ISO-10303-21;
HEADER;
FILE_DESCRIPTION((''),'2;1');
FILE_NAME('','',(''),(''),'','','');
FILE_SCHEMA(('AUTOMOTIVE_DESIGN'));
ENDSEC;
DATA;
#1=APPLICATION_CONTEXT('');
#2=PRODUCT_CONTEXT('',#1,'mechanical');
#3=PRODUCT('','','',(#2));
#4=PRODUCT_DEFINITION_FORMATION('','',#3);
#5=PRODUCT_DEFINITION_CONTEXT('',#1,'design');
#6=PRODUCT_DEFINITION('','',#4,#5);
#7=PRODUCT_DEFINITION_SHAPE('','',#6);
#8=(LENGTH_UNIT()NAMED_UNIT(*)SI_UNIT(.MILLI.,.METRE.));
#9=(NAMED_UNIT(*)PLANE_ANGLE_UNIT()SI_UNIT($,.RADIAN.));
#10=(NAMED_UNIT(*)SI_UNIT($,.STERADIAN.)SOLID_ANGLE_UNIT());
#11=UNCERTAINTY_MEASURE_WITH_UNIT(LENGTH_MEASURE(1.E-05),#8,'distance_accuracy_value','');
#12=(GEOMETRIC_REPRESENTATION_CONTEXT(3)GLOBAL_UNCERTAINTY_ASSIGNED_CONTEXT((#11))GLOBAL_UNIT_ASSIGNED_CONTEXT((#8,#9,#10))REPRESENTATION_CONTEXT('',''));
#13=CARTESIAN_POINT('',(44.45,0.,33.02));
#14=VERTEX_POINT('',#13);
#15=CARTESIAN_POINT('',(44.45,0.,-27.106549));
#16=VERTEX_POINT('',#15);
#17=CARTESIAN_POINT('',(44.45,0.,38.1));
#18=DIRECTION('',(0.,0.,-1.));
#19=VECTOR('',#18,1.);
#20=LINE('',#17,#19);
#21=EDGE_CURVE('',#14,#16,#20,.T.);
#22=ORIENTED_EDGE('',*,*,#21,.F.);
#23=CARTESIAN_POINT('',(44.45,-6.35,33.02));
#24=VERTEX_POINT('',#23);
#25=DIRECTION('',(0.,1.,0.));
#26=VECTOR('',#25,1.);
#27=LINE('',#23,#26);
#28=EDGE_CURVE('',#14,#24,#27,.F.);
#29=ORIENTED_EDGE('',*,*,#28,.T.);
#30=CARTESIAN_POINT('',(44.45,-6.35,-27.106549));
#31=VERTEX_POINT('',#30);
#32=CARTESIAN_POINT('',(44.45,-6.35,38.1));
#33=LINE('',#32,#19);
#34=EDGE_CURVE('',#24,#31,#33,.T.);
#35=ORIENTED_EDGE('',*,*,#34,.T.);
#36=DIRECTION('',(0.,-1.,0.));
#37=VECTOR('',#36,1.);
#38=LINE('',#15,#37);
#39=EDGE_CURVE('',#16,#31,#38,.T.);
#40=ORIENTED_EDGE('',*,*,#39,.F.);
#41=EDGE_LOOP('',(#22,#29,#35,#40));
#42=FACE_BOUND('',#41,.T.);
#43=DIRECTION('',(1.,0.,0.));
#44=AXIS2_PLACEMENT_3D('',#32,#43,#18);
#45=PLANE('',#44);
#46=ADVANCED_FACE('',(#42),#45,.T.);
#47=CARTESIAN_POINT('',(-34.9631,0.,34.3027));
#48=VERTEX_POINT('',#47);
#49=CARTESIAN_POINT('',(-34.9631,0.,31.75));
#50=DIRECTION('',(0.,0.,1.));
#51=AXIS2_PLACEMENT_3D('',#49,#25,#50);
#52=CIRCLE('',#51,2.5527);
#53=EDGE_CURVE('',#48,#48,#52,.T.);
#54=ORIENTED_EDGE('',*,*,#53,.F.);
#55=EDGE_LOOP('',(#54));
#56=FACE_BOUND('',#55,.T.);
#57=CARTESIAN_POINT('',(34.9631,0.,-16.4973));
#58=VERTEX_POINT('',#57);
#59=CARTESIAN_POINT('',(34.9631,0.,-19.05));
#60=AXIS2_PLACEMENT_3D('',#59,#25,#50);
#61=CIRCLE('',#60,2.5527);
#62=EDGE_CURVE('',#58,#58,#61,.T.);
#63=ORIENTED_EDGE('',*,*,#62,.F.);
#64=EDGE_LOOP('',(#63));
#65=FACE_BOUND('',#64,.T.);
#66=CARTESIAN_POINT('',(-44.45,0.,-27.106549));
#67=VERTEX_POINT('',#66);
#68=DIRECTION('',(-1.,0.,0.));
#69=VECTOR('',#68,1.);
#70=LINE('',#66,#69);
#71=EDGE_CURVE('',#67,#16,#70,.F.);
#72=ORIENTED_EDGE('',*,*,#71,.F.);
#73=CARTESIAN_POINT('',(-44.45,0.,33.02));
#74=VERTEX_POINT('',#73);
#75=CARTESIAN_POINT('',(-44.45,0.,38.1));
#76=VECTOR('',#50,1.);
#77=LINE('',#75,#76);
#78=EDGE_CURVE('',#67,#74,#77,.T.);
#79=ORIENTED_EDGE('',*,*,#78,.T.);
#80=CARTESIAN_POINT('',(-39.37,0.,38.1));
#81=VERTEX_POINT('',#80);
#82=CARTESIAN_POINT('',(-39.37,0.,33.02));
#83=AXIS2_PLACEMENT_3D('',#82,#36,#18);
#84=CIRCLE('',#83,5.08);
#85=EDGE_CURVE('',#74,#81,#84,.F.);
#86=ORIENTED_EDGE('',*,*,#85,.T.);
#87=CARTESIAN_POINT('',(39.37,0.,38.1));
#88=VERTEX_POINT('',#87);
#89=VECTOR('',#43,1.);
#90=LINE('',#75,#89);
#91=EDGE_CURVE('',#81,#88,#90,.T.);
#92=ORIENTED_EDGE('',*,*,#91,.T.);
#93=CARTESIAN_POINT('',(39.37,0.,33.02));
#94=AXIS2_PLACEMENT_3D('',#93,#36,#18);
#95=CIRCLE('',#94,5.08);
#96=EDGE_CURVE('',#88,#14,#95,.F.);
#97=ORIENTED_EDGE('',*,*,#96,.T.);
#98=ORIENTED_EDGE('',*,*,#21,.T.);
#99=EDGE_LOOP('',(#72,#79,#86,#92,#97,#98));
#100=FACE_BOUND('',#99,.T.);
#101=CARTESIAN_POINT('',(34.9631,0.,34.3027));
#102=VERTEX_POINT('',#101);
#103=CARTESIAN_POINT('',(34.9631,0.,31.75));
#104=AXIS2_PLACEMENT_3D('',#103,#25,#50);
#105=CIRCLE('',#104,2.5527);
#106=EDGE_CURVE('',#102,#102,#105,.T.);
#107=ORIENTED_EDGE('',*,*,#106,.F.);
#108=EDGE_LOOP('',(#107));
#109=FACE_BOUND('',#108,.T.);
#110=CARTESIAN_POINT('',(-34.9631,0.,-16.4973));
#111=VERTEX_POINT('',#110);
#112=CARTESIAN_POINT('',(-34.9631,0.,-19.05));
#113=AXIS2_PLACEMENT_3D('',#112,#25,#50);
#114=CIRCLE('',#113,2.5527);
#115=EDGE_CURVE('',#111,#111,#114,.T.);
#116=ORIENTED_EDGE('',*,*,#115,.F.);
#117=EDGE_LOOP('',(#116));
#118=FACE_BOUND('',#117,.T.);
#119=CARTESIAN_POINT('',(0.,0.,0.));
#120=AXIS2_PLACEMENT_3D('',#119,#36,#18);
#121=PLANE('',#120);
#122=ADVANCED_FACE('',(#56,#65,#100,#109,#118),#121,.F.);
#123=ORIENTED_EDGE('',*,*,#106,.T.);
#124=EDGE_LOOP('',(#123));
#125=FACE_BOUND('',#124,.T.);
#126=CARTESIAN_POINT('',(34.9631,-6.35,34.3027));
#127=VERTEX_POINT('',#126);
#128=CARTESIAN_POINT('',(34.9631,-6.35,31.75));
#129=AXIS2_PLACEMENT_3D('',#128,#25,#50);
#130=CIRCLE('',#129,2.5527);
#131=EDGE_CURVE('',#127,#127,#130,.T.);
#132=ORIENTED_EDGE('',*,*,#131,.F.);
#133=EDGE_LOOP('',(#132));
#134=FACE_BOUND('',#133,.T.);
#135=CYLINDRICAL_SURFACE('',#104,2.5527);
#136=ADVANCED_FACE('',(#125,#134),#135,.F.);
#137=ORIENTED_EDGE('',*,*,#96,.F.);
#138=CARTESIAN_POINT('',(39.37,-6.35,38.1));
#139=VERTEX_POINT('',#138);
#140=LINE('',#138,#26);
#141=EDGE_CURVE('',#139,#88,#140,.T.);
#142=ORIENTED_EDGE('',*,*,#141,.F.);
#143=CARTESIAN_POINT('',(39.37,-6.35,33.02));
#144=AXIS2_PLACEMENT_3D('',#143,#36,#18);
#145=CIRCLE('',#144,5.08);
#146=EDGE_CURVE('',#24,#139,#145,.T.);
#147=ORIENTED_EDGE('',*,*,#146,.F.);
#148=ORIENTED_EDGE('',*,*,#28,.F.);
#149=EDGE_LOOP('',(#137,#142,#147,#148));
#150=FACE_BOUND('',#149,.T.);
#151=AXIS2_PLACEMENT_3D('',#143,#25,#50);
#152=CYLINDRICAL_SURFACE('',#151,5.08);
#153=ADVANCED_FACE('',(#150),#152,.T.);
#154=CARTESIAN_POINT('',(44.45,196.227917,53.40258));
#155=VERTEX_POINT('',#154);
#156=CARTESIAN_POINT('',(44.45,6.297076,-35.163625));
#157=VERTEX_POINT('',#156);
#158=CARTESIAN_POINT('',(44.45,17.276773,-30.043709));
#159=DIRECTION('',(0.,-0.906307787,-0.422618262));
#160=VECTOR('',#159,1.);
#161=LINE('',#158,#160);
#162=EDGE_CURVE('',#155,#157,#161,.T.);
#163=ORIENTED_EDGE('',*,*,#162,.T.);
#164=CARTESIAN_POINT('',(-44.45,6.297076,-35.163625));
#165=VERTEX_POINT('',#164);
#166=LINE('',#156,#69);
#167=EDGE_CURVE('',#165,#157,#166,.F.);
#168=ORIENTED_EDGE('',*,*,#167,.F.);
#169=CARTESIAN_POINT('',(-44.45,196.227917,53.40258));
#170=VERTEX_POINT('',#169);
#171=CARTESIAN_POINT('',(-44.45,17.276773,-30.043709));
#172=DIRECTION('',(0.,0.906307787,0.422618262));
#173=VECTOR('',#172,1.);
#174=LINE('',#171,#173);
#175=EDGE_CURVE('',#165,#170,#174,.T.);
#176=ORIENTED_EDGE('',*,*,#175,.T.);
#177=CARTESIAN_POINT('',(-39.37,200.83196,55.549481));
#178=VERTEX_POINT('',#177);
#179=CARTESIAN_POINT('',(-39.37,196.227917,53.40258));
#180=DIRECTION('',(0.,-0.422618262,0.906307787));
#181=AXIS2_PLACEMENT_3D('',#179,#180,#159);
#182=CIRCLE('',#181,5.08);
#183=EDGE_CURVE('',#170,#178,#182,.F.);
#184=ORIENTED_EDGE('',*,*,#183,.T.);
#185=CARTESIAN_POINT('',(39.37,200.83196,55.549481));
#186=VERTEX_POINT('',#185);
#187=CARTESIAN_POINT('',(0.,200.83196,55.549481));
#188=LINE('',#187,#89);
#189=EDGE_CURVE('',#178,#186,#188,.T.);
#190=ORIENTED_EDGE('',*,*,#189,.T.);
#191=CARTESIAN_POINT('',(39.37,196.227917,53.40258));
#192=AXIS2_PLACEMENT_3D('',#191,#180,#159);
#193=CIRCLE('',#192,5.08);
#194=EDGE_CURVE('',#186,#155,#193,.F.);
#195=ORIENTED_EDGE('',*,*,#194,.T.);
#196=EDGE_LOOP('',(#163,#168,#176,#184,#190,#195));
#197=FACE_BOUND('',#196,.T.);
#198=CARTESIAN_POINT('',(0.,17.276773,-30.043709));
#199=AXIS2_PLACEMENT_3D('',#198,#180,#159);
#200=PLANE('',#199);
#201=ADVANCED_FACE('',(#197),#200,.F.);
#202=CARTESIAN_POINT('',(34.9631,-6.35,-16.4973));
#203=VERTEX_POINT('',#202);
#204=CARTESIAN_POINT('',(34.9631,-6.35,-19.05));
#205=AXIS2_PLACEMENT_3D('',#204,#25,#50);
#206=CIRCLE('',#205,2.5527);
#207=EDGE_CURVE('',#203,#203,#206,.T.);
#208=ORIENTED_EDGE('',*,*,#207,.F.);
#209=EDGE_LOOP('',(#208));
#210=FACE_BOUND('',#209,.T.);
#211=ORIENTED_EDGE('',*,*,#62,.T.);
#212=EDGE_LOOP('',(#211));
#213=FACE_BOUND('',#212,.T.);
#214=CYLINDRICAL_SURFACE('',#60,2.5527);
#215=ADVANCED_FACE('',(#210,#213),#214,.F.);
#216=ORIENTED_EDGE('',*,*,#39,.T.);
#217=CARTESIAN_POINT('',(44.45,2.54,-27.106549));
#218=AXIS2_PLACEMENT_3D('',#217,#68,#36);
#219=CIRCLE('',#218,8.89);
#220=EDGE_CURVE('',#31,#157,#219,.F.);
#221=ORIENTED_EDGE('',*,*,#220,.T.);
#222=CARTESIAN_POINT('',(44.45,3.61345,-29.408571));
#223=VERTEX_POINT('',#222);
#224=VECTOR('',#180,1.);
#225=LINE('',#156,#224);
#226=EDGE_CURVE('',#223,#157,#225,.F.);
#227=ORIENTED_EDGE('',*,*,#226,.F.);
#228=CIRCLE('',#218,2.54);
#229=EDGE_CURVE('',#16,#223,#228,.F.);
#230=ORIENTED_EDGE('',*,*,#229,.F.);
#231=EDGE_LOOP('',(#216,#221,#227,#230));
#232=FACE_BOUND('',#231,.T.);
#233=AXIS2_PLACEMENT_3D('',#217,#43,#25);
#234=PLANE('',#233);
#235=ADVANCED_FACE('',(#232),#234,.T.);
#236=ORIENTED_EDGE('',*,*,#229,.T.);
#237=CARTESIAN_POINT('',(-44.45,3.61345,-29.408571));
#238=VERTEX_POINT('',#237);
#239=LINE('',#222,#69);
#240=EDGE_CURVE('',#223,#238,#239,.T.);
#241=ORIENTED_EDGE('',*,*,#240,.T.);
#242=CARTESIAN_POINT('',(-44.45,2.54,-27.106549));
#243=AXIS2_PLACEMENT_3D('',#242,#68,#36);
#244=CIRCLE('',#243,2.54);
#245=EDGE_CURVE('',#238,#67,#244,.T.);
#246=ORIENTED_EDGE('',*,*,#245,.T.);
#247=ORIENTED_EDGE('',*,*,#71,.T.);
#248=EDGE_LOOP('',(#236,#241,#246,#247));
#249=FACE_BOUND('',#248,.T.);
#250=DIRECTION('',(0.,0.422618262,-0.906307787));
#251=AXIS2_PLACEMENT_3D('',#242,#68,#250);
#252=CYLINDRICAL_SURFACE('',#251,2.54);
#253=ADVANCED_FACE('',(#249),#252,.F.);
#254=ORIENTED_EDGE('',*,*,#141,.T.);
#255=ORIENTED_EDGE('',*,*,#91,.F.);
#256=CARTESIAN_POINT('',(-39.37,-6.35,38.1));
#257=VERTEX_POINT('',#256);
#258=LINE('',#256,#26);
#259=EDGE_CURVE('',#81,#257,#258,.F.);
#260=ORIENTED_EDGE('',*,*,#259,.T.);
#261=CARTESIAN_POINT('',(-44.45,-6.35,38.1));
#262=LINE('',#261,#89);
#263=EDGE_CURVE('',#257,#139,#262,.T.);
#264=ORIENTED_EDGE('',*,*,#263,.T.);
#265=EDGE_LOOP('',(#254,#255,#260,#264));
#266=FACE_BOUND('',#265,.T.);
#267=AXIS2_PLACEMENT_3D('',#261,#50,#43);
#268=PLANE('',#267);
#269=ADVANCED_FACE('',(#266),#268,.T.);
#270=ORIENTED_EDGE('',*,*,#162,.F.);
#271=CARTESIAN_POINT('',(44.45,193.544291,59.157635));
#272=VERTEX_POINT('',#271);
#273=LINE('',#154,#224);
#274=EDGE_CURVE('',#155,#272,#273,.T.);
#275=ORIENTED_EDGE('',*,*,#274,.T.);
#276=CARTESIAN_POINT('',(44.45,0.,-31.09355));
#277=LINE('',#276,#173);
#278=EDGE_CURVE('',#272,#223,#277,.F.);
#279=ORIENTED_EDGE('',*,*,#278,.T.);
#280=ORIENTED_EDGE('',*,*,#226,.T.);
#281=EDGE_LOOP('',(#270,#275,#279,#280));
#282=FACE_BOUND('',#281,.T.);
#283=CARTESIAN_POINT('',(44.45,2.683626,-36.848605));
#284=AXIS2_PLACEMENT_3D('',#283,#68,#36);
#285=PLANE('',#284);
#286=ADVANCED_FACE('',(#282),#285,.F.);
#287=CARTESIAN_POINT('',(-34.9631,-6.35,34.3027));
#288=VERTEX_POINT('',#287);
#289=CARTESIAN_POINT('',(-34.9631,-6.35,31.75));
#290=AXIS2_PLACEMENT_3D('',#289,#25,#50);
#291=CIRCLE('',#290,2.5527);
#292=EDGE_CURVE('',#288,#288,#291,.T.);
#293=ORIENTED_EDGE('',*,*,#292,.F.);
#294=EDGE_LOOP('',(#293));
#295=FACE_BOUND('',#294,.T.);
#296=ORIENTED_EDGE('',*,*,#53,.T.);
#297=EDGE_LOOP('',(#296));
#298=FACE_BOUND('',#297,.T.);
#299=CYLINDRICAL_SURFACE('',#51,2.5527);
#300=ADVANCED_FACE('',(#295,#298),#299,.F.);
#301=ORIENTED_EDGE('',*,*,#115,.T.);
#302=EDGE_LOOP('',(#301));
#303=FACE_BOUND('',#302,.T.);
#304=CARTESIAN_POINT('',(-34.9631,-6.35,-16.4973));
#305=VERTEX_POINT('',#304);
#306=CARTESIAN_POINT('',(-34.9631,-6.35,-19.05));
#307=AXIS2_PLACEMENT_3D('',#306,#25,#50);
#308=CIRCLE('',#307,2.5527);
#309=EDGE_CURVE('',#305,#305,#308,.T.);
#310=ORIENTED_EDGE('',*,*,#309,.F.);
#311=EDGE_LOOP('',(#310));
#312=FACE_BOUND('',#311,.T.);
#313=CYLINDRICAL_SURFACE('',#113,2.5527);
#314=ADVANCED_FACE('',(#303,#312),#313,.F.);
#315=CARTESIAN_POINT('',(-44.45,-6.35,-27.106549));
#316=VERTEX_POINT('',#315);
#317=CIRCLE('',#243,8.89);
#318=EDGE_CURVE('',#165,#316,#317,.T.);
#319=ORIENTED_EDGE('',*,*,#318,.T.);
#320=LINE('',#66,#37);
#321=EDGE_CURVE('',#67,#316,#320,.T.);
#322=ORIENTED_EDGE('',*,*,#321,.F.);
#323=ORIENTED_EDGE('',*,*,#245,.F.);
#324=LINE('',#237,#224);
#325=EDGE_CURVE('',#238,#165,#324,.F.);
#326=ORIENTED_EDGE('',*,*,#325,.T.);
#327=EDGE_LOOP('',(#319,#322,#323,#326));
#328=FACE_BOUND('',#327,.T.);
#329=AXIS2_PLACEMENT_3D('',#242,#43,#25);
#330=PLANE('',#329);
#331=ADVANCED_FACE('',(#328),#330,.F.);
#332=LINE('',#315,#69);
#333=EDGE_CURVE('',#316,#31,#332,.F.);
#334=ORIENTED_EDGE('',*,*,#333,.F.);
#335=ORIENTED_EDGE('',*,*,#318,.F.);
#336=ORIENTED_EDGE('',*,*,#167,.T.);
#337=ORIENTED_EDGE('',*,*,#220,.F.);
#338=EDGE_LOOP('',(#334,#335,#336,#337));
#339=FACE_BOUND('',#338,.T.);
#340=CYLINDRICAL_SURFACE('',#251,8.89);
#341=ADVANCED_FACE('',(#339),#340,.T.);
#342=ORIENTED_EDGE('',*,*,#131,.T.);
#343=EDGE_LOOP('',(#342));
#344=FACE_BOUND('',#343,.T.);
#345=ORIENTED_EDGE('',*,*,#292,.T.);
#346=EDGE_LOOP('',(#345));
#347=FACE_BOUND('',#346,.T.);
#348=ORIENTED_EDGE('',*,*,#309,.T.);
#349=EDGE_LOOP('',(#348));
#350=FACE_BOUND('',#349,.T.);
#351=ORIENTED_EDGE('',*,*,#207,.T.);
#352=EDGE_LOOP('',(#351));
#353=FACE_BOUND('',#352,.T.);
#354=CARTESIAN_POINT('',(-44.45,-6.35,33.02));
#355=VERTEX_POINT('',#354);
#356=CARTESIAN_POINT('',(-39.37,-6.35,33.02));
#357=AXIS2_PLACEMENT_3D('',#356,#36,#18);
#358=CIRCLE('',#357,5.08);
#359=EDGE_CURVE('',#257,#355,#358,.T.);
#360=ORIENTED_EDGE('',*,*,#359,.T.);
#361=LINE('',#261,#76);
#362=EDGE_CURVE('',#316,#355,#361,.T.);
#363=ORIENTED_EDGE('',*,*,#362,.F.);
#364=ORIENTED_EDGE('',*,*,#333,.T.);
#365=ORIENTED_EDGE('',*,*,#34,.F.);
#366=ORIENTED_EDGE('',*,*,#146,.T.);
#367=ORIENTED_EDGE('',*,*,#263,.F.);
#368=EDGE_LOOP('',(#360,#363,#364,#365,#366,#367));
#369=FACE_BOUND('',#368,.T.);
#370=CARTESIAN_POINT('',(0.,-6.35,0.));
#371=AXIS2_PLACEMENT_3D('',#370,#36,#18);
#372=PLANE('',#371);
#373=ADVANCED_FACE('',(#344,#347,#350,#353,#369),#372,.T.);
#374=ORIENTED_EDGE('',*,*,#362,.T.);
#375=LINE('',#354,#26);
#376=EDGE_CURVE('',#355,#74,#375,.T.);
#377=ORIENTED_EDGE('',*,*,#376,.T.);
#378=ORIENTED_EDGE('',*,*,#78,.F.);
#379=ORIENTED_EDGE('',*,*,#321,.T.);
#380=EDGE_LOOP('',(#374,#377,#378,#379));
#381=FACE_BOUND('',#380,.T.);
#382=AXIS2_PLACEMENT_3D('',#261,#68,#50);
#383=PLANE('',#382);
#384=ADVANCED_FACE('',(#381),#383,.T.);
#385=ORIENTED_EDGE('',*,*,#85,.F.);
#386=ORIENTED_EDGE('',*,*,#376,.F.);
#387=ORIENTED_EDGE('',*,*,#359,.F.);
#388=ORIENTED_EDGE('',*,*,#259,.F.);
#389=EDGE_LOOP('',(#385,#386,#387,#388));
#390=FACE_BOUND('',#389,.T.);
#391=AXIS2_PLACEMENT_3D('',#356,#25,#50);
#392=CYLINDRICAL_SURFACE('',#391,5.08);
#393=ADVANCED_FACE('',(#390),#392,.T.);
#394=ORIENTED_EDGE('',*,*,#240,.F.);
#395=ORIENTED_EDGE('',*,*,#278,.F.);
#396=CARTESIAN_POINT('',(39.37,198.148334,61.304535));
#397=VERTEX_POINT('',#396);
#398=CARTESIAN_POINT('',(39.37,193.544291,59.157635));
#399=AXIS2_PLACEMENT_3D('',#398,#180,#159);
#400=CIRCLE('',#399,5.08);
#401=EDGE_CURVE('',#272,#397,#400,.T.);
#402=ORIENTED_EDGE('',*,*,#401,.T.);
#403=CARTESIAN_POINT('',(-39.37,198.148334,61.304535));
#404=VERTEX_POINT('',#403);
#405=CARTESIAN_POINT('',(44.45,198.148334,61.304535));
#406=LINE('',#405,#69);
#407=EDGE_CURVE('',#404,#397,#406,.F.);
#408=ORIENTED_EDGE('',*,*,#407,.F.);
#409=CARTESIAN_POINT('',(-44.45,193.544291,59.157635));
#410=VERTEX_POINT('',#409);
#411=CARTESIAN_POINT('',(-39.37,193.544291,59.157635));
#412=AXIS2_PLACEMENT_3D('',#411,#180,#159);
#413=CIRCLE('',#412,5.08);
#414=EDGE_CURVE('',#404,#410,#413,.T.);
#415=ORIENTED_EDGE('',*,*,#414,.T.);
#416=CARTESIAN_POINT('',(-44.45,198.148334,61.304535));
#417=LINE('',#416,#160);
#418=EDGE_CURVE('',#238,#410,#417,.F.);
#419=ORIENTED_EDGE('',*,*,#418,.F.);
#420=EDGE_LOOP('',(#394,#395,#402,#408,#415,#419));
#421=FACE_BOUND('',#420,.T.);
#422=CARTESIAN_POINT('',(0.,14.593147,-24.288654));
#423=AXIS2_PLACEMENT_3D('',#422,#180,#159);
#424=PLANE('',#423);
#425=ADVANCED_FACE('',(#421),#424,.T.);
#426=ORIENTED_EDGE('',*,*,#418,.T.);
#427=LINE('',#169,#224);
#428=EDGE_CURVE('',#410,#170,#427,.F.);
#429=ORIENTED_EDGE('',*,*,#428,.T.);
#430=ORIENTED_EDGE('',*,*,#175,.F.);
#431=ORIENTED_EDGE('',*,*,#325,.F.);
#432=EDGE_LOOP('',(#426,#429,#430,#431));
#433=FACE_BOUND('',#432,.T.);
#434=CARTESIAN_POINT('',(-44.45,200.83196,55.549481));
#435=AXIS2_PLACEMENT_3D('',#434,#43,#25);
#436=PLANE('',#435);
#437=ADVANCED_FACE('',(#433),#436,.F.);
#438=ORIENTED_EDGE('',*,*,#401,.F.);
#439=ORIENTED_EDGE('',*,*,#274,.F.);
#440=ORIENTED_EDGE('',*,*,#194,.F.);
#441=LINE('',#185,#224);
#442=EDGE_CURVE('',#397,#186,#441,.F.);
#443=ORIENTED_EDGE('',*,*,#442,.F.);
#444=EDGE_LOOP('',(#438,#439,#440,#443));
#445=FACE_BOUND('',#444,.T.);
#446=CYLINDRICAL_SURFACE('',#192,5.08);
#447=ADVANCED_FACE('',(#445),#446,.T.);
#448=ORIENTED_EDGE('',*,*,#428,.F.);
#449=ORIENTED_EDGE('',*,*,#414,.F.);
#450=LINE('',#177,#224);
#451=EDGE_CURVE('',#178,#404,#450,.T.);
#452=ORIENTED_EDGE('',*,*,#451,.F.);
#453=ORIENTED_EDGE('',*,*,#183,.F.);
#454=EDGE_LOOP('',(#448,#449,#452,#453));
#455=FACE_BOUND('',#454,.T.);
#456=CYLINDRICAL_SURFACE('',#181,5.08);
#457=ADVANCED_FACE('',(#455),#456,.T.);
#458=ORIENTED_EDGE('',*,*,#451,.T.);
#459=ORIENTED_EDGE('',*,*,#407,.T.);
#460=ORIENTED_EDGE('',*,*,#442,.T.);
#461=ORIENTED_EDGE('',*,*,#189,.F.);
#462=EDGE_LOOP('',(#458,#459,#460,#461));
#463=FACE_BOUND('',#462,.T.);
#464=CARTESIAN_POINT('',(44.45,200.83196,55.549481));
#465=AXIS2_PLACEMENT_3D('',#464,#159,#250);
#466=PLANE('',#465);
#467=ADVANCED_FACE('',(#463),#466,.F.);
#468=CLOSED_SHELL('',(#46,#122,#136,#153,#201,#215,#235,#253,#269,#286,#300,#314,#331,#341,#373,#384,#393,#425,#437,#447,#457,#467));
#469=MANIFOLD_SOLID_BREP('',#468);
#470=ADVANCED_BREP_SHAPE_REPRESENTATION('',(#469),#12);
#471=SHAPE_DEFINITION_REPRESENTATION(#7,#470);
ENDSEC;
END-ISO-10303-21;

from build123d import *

# Parameters (mm, degrees)
SKETCH1_W                      = 88.9
SKETCH1_H                      = 76.2
BASE_FLANGE1_DEPTH             = 6.35
EDGE_FLANGE1_START             = -44.45
EDGE_FLANGE1_DEPTH             = 88.9
EDGE_FLANGE1_2_DEPTH           = 88.9
F_7_0_201_DIAMETER_HOLE1_D     = 5.1054
F_7_0_201_DIAMETER_HOLE1_DEPTH = 6.35
FILLET1_R                      = 5.08


# Read off the part's stored shape, not the designer's step: Edge-Flange1
# Sheet-metal steps are written as plain solids
with BuildPart() as part:
    # Sketch1 → Base-Flange1 (new body)
    with BuildSketch(Plane(origin=(0, 0, 0), x_dir=(1, 0, 0), z_dir=(0, 1, 0))):
        Rectangle(SKETCH1_W, SKETCH1_H)
    extrude(amount=-BASE_FLANGE1_DEPTH)

    # Edge-Flange1 outline → Edge-Flange1 (cut)
    with BuildSketch(Plane.YZ.offset(EDGE_FLANGE1_START)):
        with BuildLine():
            Line((0, -38.1), (0, -35.625967843))
            ThreePointArc((0, -35.625967843), (-4.587857322, -32.419340017), (-6.35, -27.106548849))
            Line((-6.35, -27.106548849), (-6.35, -38.1))
            Line((-6.35, -38.1), (0, -38.1))
        make_face()
    extrude(amount=EDGE_FLANGE1_DEPTH, mode=Mode.SUBTRACT)

    # Edge-Flange1 2 outline → Edge-Flange1 2 (add)
    with BuildSketch(Plane.YZ.offset(EDGE_FLANGE1_START)):
        with BuildLine():
            ThreePointArc((0, -35.625967843), (3.190967678, -35.972683355), (6.297076347, -35.163625075))
            Line((6.297076347, -35.163625075), (200.831960117, 55.549481005))
            Line((200.831960117, 55.549481005), (198.148334155, 61.304535452))
            Line((198.148334155, 61.304535452), (3.613450385, -29.408570628))
            ThreePointArc((3.613450385, -29.408570628), (1.175258995, -29.248763121), (0, -27.106548849))
            Line((0, -27.106548849), (0, -35.625967843))
        make_face()
    extrude(amount=EDGE_FLANGE1_2_DEPTH)

    # #7 (0.201) Diameter Hole1
    with Locations(Plane(origin=(0, 0, 0), x_dir=(1, 0, 0), z_dir=(0, 1, 0))):
        with Locations((-34.9631, 19.05), (34.9631, 19.05), (34.9631, -31.75), (-34.9631, -31.75)):
            Hole(F_7_0_201_DIAMETER_HOLE1_D / 2, depth=F_7_0_201_DIAMETER_HOLE1_DEPTH)

    # Fillet1
    fillet1_edges = [part.edges().sort_by_distance(p)[0] for p in [
        (44.45, 199.490147136, 58.427008229),
        (-44.45, 199.490147136, 58.427008229),
        (44.45, -3.175, 38.1),
        (-44.45, -3.175, 38.1),
    ]]
    fillet(fillet1_edges, radius=FILLET1_R)


solid = part.part
